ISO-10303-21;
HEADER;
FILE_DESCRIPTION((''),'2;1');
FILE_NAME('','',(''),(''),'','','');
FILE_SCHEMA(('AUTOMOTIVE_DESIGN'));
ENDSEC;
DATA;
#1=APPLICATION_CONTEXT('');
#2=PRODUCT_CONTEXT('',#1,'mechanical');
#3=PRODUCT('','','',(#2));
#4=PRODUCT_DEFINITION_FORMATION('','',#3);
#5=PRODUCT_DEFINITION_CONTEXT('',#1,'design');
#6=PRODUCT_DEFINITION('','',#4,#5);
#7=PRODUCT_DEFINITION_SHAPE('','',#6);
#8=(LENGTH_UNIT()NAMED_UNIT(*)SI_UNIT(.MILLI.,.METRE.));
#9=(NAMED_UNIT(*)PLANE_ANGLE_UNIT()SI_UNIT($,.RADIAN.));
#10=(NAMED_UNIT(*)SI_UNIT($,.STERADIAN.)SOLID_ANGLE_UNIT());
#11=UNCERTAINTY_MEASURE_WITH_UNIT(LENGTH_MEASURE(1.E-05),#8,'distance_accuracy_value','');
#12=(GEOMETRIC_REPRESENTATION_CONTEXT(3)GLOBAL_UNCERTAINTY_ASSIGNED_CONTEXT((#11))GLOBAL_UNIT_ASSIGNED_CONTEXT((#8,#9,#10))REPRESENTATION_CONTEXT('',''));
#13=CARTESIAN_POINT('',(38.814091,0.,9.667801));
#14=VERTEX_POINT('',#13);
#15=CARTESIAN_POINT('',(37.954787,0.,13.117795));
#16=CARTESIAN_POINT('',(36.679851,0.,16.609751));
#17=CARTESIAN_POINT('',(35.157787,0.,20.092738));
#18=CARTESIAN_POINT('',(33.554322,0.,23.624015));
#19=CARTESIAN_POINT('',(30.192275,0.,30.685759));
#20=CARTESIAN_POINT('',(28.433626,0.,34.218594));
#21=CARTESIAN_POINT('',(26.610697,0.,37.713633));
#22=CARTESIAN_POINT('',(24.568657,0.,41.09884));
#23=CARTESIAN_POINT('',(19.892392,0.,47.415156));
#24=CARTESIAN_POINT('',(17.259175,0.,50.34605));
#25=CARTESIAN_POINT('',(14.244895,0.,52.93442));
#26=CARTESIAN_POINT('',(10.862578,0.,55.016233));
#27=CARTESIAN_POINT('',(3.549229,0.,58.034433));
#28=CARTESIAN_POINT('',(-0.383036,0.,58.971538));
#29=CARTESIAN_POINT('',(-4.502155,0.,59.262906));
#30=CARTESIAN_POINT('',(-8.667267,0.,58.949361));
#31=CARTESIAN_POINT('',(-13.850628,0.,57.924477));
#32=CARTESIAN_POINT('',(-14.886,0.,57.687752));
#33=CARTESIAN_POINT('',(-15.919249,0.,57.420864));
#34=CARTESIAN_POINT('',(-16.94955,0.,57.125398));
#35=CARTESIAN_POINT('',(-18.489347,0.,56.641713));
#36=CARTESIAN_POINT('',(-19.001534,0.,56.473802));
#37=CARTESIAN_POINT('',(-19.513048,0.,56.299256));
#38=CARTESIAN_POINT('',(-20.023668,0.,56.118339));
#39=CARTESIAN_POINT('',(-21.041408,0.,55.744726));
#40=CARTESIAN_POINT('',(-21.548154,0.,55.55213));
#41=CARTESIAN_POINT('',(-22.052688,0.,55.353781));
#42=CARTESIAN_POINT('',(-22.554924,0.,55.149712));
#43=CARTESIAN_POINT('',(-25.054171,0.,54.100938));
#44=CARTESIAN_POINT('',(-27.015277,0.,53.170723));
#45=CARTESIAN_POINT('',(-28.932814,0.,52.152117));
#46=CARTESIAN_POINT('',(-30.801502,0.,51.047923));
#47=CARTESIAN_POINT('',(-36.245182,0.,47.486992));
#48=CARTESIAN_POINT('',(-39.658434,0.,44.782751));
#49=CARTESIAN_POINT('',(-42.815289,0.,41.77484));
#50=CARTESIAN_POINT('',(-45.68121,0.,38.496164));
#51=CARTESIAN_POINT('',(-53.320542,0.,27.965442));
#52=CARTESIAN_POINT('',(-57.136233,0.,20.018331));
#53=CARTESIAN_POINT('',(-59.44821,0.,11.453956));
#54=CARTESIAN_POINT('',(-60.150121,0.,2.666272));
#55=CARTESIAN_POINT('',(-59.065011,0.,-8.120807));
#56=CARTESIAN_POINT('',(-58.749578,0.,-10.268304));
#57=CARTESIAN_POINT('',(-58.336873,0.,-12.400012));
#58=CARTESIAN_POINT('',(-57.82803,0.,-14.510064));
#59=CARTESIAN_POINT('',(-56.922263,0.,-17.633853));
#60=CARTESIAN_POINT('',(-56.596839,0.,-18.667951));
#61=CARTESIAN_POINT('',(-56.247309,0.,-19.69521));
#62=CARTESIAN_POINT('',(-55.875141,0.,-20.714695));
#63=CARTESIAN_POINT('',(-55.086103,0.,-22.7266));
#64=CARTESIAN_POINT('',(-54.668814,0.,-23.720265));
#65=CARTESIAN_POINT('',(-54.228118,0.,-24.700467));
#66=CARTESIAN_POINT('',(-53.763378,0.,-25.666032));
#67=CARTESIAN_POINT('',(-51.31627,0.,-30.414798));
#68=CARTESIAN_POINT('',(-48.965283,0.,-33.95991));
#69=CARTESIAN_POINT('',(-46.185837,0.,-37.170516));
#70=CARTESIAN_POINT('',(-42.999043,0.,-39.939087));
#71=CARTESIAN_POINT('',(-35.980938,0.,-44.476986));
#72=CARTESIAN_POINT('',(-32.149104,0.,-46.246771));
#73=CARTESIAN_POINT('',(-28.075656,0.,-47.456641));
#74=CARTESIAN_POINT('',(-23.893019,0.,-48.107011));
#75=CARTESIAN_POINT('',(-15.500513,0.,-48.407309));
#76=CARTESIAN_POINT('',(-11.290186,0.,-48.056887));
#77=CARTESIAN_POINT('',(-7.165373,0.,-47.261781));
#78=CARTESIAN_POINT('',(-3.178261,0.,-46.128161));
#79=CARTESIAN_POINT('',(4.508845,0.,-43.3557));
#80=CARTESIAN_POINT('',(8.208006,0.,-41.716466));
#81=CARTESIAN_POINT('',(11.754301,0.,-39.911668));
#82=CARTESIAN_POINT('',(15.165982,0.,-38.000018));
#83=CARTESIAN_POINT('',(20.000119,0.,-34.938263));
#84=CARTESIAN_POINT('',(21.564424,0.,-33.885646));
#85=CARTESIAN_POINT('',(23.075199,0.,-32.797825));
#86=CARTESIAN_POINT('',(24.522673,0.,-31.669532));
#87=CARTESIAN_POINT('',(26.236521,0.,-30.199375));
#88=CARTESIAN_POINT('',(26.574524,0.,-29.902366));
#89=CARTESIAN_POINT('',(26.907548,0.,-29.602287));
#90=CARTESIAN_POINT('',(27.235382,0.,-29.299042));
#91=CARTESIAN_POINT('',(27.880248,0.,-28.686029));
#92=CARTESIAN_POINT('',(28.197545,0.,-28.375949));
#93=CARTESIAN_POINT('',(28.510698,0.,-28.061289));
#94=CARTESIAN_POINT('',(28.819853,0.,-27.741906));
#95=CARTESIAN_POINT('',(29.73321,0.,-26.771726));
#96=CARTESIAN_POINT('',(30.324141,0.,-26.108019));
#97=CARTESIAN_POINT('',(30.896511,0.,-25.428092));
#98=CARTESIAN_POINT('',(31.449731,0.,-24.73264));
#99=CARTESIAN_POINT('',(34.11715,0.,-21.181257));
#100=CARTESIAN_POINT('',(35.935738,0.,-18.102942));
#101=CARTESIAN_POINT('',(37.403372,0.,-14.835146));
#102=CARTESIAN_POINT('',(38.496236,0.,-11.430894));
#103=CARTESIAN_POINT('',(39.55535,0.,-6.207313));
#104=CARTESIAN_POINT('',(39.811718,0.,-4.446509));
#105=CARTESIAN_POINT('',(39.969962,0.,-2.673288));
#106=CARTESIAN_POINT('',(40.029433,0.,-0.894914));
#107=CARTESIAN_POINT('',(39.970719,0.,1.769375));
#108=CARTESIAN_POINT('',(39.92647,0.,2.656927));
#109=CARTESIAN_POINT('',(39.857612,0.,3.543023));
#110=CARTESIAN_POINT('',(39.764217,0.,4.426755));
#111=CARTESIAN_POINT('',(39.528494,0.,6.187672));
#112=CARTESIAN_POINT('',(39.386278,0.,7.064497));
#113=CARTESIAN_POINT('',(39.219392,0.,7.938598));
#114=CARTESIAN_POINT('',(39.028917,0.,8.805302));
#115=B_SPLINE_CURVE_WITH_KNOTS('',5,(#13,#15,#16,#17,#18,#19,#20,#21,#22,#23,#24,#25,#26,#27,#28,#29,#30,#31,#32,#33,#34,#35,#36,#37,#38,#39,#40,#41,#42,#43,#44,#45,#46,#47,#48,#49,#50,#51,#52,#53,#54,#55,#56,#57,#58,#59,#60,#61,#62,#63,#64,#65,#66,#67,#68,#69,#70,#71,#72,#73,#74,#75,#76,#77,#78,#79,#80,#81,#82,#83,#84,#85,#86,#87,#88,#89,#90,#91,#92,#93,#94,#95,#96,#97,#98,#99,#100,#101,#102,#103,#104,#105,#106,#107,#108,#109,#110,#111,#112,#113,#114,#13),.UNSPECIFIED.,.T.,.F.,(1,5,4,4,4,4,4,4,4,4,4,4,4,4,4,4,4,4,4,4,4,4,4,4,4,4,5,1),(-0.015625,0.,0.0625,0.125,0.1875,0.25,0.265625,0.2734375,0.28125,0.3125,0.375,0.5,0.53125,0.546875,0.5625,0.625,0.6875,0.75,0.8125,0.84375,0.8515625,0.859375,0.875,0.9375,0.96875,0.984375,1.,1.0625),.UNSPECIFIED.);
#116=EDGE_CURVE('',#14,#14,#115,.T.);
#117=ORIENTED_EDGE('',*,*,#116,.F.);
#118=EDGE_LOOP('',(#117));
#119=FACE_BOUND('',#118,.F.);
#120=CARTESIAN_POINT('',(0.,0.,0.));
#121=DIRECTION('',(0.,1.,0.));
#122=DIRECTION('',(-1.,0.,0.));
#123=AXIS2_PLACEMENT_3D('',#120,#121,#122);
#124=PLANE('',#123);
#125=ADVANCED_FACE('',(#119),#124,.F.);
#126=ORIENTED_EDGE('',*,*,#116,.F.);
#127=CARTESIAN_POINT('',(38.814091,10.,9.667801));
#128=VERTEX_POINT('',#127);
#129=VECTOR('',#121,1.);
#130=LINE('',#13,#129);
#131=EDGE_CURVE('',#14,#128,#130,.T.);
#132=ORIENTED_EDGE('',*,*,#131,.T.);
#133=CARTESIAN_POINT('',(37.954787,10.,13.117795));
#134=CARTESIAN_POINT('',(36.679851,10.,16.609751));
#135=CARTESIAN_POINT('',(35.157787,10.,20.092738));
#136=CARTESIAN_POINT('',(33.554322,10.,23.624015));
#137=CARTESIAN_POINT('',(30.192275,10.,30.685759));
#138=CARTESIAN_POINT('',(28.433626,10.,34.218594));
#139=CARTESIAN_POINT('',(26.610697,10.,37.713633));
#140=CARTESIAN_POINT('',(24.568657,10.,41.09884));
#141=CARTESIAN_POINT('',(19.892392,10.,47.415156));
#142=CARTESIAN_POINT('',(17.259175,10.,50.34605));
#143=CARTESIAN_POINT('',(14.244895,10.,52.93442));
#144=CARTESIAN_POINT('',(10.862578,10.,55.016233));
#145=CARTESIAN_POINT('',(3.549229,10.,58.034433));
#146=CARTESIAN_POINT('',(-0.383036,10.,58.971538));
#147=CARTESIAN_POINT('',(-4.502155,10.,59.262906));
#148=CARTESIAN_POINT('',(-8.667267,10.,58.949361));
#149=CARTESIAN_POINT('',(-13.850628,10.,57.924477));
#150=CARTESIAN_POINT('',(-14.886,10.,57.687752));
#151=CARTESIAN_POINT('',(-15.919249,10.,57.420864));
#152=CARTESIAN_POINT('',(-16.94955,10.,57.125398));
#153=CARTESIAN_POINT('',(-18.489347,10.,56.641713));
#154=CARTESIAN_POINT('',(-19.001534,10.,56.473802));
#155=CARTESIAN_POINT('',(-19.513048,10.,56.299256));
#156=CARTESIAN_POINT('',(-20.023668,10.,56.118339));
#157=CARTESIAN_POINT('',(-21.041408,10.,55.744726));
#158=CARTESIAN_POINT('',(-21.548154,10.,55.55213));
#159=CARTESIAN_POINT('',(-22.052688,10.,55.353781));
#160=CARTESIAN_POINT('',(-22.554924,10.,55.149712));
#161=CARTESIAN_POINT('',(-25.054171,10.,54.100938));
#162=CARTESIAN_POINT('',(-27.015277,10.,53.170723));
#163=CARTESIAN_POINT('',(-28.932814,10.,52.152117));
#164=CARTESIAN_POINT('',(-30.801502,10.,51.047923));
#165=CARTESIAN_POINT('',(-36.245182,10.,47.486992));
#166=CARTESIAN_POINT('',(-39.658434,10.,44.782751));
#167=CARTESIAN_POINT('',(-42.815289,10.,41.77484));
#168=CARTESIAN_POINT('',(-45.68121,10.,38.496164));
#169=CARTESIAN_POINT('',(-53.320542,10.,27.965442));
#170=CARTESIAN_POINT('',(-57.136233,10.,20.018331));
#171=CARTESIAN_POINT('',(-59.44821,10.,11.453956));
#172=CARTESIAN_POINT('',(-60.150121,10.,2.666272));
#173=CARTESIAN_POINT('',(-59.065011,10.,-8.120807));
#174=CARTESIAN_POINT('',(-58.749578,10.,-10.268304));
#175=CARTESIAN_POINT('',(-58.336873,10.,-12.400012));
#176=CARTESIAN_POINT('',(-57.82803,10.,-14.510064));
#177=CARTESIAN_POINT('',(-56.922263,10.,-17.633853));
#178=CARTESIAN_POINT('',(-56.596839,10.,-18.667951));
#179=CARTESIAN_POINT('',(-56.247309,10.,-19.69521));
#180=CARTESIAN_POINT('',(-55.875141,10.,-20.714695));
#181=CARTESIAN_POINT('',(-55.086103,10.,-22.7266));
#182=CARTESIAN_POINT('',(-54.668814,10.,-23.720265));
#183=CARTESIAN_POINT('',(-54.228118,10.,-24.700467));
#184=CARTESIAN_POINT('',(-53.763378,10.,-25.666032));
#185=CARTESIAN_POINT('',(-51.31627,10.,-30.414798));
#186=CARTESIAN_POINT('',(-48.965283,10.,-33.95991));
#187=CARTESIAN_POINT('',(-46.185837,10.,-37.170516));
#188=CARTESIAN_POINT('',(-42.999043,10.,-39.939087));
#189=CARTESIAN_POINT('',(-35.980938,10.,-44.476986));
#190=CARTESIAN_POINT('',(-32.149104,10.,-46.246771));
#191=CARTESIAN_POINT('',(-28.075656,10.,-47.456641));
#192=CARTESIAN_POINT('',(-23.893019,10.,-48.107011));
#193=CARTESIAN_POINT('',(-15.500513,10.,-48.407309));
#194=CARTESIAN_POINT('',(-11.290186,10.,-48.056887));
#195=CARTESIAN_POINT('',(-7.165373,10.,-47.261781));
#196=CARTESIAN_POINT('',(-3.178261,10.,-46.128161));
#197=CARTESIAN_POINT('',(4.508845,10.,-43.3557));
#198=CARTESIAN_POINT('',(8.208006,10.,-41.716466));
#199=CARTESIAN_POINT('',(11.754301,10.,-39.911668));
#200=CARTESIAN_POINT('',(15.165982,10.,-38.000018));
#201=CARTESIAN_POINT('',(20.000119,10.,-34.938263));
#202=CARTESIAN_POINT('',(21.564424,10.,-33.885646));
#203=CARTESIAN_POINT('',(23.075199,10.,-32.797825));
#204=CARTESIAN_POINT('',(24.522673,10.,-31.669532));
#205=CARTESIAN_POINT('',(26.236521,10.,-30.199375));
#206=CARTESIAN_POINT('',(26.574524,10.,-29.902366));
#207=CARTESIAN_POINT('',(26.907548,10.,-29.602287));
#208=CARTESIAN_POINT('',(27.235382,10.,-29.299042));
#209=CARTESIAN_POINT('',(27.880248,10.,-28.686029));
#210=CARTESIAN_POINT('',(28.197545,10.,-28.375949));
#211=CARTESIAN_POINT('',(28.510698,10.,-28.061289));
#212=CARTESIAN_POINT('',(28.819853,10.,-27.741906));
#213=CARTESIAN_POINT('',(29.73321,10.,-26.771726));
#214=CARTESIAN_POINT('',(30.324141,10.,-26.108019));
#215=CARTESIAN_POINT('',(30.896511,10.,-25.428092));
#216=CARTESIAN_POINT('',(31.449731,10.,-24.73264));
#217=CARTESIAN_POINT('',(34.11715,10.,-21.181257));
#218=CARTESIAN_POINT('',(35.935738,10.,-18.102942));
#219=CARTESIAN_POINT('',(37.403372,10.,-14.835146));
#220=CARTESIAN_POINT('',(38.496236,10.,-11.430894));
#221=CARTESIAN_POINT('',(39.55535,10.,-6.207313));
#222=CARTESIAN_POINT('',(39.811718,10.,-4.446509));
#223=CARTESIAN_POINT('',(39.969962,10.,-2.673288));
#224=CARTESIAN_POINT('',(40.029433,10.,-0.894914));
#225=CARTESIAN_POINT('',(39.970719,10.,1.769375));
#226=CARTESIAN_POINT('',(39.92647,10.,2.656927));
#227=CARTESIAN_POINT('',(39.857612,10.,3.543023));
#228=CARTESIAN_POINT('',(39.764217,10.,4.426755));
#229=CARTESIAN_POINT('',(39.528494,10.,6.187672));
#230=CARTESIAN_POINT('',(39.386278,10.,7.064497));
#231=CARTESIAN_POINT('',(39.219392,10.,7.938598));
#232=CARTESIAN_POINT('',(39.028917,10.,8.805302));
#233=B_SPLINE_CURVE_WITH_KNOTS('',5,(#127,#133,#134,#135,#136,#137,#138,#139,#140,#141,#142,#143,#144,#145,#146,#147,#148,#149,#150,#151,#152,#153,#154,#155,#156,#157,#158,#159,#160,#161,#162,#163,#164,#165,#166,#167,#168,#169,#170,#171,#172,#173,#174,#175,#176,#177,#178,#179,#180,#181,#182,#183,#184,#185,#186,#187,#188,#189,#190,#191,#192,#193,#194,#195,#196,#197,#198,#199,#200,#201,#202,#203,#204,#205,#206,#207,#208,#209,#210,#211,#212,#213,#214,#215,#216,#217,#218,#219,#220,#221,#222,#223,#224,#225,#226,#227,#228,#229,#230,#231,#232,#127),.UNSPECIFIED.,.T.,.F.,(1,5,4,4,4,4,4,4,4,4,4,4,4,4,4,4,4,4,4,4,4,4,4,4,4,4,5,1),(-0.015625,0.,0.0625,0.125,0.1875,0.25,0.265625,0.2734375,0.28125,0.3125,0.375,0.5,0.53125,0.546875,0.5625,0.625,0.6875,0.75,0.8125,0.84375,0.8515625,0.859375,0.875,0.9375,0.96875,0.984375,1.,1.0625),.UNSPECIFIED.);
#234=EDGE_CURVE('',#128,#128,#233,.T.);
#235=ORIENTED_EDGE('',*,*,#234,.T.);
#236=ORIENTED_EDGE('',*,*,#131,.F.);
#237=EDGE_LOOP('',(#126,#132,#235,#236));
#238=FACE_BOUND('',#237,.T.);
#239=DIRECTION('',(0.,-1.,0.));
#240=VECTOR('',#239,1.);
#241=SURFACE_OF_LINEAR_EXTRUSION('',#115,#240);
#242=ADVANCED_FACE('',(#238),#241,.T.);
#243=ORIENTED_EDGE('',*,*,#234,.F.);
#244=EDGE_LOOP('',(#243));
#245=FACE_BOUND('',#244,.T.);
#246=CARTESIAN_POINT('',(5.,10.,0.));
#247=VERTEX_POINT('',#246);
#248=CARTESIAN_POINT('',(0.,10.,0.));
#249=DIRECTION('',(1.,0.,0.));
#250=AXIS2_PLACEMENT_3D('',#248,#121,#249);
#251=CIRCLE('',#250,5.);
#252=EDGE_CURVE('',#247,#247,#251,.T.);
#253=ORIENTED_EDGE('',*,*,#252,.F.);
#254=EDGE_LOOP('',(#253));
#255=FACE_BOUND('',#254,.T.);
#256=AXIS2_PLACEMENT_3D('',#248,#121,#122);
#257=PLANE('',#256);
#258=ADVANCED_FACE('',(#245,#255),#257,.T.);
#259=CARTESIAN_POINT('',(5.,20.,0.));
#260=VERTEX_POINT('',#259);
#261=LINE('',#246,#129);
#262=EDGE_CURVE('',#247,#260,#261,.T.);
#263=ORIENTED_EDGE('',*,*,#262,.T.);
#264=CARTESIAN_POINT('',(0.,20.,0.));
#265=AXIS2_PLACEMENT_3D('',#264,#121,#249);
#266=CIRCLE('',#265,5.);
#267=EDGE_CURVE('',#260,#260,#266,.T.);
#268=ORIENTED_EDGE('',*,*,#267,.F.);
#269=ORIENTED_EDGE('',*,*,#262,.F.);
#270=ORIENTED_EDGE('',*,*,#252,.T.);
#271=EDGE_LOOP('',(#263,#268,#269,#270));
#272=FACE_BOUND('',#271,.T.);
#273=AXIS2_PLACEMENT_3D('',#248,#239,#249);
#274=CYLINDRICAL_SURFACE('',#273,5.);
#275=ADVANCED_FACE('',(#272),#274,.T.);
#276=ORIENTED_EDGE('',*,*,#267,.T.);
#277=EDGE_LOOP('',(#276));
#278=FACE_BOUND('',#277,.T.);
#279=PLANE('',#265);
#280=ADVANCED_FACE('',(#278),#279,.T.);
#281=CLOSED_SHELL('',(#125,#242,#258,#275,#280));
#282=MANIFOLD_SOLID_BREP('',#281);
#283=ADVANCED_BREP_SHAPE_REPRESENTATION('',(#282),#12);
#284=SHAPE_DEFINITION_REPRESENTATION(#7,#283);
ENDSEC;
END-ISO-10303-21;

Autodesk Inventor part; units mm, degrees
ref_plane "YZ Plane" through (0, 0, 0) normal (1, 0, 0) x (0, 1, 0)
ref_plane "XZ Plane" through (0, 0, 0) normal (0, 1, 0) x (-1, 0, 0)
ref_plane "XY Plane" through (0, 0, 0) normal (0, 0, 1) x (1, 0, 0)
sketch "草圖1" plane through (0, 0, 0) normal (0, 1, 0) x (-1, 0, 0)
  spline S0 degree 5 number of poles 3605
  spline S1 degree 5 number of poles 3605
  point P0 (0, 0)
  point P1 (0, 0)
  point P2 (0, 0)
sketch "草圖1 outline for 擠出1" plane through (0, 0, 0) normal (0, 1, 0) x (-1, 0, 0)
  spline S0 degree 5 poles (-38.814091, 9.667801) (-37.954787, 13.117795) (-36.679851, 16.609751) (-35.157787, 20.092738) (-33.554322, 23.624015) (-30.192275, 30.685759) (-28.433626, 34.218594) (-26.610697, 37.713633) (-24.568657, 41.09884) (-19.892392, 47.415156) (-17.259175, 50.34605) (-14.244895, 52.93442) (-10.862578, 55.016233) (-3.549229, 58.034433) (0.383036, 58.971538) (4.502155, 59.262906) (8.667267, 58.949361) (13.850628, 57.924477) (14.886, 57.687752) (15.919249, 57.420864) (16.94955, 57.125398) (18.489347, 56.641713) (19.001534, 56.473802) (19.513048, 56.299256) (20.023668, 56.118339) (21.041408, 55.744726) (21.548154, 55.55213) (22.052688, 55.353781) (22.554924, 55.149712) (25.054171, 54.100938) (27.015277, 53.170723) (28.932814, 52.152117) (30.801502, 51.047923) (36.245182, 47.486992) (39.658434, 44.782751) (42.815289, 41.77484) (45.68121, 38.496164) (53.320542, 27.965442) (57.136233, 20.018331) (59.44821, 11.453956) (60.150121, 2.666272) (59.065011, -8.120807) (58.749578, -10.268304) (58.336873, -12.400012) (57.82803, -14.510064) (56.922263, -17.633853) (56.596839, -18.667951) (56.247309, -19.69521) (55.875141, -20.714695) (55.086103, -22.7266) (54.668814, -23.720265) (54.228118, -24.700467) (53.763378, -25.666032) (51.31627, -30.414798) (48.965283, -33.95991) (46.185837, -37.170516) (42.999043, -39.939087) (35.980938, -44.476986) (32.149104, -46.246771) (28.075656, -47.456641) (23.893019, -48.107011) (15.500513, -48.407309) (11.290186, -48.056887) (7.165373, -47.261781) (3.178261, -46.128161) (-4.508845, -43.3557) (-8.208006, -41.716466) (-11.754301, -39.911668) (-15.165982, -38.000018) (-20.000119, -34.938263) (-21.564424, -33.885646) (-23.075199, -32.797825) (-24.522673, -31.669532) (-26.236521, -30.199375) (-26.574524, -29.902366) (-26.907548, -29.602287) (-27.235382, -29.299042) (-27.880248, -28.686029) (-28.197545, -28.375949) (-28.510698, -28.061289) (-28.819853, -27.741906) (-29.73321, -26.771726) (-30.324141, -26.108019) (-30.896511, -25.428092) (-31.449731, -24.73264) (-34.11715, -21.181257) (-35.935738, -18.102942) (-37.403372, -14.835146) (-38.496236, -11.430894) (-39.55535, -6.207313) (-39.811718, -4.446509) (-39.969962, -2.673288) (-40.029433, -0.894914) (-39.970719, 1.769375) (-39.92647, 2.656927) (-39.857612, 3.543023) (-39.764217, 4.426755) (-39.528494, 6.187672) (-39.386278, 7.064497) (-39.219392, 7.938598) (-39.028917, 8.805302) (-38.814091, 9.667801) knots 0 0 0 0 0 0 0.0625 0.0625 0.0625 0.0625 0.125 0.125 0.125 0.125 0.1875 0.1875 0.1875 0.1875 0.25 0.25 0.25 0.25 0.265625 0.265625 0.265625 0.265625 0.2734375 0.2734375 0.2734375 0.2734375 0.28125 0.28125 0.28125 0.28125 0.3125 0.3125 0.3125 0.3125 0.375 0.375 0.375 0.375 0.5 0.5 0.5 0.5 0.53125 0.53125 0.53125 0.53125 0.546875 0.546875 0.546875 0.546875 0.5625 0.5625 0.5625 0.5625 0.625 0.625 0.625 0.625 0.6875 0.6875 0.6875 0.6875 0.75 0.75 0.75 0.75 0.8125 0.8125 0.8125 0.8125 0.84375 0.84375 0.84375 0.84375 0.8515625 0.8515625 0.8515625 0.8515625 0.859375 0.859375 0.859375 0.859375 0.875 0.875 0.875 0.875 0.9375 0.9375 0.9375 0.9375 0.96875 0.96875 0.96875 0.96875 0.984375 0.984375 0.984375 0.984375 1 1 1 1 1 1
extrude "擠出1" add sketch "草圖1 outline for 擠出1" along normal blind 10
sketch "草圖2" plane through (0, 10, 0) normal (0, 1, 0) x (1, 0, 0)
  circle A0 centre (0, 0) radius 5
  dimension "d2" = 10
extrude "擠出2" add sketch "草圖2" along normal blind 10
properties part number "凸輪_2"
